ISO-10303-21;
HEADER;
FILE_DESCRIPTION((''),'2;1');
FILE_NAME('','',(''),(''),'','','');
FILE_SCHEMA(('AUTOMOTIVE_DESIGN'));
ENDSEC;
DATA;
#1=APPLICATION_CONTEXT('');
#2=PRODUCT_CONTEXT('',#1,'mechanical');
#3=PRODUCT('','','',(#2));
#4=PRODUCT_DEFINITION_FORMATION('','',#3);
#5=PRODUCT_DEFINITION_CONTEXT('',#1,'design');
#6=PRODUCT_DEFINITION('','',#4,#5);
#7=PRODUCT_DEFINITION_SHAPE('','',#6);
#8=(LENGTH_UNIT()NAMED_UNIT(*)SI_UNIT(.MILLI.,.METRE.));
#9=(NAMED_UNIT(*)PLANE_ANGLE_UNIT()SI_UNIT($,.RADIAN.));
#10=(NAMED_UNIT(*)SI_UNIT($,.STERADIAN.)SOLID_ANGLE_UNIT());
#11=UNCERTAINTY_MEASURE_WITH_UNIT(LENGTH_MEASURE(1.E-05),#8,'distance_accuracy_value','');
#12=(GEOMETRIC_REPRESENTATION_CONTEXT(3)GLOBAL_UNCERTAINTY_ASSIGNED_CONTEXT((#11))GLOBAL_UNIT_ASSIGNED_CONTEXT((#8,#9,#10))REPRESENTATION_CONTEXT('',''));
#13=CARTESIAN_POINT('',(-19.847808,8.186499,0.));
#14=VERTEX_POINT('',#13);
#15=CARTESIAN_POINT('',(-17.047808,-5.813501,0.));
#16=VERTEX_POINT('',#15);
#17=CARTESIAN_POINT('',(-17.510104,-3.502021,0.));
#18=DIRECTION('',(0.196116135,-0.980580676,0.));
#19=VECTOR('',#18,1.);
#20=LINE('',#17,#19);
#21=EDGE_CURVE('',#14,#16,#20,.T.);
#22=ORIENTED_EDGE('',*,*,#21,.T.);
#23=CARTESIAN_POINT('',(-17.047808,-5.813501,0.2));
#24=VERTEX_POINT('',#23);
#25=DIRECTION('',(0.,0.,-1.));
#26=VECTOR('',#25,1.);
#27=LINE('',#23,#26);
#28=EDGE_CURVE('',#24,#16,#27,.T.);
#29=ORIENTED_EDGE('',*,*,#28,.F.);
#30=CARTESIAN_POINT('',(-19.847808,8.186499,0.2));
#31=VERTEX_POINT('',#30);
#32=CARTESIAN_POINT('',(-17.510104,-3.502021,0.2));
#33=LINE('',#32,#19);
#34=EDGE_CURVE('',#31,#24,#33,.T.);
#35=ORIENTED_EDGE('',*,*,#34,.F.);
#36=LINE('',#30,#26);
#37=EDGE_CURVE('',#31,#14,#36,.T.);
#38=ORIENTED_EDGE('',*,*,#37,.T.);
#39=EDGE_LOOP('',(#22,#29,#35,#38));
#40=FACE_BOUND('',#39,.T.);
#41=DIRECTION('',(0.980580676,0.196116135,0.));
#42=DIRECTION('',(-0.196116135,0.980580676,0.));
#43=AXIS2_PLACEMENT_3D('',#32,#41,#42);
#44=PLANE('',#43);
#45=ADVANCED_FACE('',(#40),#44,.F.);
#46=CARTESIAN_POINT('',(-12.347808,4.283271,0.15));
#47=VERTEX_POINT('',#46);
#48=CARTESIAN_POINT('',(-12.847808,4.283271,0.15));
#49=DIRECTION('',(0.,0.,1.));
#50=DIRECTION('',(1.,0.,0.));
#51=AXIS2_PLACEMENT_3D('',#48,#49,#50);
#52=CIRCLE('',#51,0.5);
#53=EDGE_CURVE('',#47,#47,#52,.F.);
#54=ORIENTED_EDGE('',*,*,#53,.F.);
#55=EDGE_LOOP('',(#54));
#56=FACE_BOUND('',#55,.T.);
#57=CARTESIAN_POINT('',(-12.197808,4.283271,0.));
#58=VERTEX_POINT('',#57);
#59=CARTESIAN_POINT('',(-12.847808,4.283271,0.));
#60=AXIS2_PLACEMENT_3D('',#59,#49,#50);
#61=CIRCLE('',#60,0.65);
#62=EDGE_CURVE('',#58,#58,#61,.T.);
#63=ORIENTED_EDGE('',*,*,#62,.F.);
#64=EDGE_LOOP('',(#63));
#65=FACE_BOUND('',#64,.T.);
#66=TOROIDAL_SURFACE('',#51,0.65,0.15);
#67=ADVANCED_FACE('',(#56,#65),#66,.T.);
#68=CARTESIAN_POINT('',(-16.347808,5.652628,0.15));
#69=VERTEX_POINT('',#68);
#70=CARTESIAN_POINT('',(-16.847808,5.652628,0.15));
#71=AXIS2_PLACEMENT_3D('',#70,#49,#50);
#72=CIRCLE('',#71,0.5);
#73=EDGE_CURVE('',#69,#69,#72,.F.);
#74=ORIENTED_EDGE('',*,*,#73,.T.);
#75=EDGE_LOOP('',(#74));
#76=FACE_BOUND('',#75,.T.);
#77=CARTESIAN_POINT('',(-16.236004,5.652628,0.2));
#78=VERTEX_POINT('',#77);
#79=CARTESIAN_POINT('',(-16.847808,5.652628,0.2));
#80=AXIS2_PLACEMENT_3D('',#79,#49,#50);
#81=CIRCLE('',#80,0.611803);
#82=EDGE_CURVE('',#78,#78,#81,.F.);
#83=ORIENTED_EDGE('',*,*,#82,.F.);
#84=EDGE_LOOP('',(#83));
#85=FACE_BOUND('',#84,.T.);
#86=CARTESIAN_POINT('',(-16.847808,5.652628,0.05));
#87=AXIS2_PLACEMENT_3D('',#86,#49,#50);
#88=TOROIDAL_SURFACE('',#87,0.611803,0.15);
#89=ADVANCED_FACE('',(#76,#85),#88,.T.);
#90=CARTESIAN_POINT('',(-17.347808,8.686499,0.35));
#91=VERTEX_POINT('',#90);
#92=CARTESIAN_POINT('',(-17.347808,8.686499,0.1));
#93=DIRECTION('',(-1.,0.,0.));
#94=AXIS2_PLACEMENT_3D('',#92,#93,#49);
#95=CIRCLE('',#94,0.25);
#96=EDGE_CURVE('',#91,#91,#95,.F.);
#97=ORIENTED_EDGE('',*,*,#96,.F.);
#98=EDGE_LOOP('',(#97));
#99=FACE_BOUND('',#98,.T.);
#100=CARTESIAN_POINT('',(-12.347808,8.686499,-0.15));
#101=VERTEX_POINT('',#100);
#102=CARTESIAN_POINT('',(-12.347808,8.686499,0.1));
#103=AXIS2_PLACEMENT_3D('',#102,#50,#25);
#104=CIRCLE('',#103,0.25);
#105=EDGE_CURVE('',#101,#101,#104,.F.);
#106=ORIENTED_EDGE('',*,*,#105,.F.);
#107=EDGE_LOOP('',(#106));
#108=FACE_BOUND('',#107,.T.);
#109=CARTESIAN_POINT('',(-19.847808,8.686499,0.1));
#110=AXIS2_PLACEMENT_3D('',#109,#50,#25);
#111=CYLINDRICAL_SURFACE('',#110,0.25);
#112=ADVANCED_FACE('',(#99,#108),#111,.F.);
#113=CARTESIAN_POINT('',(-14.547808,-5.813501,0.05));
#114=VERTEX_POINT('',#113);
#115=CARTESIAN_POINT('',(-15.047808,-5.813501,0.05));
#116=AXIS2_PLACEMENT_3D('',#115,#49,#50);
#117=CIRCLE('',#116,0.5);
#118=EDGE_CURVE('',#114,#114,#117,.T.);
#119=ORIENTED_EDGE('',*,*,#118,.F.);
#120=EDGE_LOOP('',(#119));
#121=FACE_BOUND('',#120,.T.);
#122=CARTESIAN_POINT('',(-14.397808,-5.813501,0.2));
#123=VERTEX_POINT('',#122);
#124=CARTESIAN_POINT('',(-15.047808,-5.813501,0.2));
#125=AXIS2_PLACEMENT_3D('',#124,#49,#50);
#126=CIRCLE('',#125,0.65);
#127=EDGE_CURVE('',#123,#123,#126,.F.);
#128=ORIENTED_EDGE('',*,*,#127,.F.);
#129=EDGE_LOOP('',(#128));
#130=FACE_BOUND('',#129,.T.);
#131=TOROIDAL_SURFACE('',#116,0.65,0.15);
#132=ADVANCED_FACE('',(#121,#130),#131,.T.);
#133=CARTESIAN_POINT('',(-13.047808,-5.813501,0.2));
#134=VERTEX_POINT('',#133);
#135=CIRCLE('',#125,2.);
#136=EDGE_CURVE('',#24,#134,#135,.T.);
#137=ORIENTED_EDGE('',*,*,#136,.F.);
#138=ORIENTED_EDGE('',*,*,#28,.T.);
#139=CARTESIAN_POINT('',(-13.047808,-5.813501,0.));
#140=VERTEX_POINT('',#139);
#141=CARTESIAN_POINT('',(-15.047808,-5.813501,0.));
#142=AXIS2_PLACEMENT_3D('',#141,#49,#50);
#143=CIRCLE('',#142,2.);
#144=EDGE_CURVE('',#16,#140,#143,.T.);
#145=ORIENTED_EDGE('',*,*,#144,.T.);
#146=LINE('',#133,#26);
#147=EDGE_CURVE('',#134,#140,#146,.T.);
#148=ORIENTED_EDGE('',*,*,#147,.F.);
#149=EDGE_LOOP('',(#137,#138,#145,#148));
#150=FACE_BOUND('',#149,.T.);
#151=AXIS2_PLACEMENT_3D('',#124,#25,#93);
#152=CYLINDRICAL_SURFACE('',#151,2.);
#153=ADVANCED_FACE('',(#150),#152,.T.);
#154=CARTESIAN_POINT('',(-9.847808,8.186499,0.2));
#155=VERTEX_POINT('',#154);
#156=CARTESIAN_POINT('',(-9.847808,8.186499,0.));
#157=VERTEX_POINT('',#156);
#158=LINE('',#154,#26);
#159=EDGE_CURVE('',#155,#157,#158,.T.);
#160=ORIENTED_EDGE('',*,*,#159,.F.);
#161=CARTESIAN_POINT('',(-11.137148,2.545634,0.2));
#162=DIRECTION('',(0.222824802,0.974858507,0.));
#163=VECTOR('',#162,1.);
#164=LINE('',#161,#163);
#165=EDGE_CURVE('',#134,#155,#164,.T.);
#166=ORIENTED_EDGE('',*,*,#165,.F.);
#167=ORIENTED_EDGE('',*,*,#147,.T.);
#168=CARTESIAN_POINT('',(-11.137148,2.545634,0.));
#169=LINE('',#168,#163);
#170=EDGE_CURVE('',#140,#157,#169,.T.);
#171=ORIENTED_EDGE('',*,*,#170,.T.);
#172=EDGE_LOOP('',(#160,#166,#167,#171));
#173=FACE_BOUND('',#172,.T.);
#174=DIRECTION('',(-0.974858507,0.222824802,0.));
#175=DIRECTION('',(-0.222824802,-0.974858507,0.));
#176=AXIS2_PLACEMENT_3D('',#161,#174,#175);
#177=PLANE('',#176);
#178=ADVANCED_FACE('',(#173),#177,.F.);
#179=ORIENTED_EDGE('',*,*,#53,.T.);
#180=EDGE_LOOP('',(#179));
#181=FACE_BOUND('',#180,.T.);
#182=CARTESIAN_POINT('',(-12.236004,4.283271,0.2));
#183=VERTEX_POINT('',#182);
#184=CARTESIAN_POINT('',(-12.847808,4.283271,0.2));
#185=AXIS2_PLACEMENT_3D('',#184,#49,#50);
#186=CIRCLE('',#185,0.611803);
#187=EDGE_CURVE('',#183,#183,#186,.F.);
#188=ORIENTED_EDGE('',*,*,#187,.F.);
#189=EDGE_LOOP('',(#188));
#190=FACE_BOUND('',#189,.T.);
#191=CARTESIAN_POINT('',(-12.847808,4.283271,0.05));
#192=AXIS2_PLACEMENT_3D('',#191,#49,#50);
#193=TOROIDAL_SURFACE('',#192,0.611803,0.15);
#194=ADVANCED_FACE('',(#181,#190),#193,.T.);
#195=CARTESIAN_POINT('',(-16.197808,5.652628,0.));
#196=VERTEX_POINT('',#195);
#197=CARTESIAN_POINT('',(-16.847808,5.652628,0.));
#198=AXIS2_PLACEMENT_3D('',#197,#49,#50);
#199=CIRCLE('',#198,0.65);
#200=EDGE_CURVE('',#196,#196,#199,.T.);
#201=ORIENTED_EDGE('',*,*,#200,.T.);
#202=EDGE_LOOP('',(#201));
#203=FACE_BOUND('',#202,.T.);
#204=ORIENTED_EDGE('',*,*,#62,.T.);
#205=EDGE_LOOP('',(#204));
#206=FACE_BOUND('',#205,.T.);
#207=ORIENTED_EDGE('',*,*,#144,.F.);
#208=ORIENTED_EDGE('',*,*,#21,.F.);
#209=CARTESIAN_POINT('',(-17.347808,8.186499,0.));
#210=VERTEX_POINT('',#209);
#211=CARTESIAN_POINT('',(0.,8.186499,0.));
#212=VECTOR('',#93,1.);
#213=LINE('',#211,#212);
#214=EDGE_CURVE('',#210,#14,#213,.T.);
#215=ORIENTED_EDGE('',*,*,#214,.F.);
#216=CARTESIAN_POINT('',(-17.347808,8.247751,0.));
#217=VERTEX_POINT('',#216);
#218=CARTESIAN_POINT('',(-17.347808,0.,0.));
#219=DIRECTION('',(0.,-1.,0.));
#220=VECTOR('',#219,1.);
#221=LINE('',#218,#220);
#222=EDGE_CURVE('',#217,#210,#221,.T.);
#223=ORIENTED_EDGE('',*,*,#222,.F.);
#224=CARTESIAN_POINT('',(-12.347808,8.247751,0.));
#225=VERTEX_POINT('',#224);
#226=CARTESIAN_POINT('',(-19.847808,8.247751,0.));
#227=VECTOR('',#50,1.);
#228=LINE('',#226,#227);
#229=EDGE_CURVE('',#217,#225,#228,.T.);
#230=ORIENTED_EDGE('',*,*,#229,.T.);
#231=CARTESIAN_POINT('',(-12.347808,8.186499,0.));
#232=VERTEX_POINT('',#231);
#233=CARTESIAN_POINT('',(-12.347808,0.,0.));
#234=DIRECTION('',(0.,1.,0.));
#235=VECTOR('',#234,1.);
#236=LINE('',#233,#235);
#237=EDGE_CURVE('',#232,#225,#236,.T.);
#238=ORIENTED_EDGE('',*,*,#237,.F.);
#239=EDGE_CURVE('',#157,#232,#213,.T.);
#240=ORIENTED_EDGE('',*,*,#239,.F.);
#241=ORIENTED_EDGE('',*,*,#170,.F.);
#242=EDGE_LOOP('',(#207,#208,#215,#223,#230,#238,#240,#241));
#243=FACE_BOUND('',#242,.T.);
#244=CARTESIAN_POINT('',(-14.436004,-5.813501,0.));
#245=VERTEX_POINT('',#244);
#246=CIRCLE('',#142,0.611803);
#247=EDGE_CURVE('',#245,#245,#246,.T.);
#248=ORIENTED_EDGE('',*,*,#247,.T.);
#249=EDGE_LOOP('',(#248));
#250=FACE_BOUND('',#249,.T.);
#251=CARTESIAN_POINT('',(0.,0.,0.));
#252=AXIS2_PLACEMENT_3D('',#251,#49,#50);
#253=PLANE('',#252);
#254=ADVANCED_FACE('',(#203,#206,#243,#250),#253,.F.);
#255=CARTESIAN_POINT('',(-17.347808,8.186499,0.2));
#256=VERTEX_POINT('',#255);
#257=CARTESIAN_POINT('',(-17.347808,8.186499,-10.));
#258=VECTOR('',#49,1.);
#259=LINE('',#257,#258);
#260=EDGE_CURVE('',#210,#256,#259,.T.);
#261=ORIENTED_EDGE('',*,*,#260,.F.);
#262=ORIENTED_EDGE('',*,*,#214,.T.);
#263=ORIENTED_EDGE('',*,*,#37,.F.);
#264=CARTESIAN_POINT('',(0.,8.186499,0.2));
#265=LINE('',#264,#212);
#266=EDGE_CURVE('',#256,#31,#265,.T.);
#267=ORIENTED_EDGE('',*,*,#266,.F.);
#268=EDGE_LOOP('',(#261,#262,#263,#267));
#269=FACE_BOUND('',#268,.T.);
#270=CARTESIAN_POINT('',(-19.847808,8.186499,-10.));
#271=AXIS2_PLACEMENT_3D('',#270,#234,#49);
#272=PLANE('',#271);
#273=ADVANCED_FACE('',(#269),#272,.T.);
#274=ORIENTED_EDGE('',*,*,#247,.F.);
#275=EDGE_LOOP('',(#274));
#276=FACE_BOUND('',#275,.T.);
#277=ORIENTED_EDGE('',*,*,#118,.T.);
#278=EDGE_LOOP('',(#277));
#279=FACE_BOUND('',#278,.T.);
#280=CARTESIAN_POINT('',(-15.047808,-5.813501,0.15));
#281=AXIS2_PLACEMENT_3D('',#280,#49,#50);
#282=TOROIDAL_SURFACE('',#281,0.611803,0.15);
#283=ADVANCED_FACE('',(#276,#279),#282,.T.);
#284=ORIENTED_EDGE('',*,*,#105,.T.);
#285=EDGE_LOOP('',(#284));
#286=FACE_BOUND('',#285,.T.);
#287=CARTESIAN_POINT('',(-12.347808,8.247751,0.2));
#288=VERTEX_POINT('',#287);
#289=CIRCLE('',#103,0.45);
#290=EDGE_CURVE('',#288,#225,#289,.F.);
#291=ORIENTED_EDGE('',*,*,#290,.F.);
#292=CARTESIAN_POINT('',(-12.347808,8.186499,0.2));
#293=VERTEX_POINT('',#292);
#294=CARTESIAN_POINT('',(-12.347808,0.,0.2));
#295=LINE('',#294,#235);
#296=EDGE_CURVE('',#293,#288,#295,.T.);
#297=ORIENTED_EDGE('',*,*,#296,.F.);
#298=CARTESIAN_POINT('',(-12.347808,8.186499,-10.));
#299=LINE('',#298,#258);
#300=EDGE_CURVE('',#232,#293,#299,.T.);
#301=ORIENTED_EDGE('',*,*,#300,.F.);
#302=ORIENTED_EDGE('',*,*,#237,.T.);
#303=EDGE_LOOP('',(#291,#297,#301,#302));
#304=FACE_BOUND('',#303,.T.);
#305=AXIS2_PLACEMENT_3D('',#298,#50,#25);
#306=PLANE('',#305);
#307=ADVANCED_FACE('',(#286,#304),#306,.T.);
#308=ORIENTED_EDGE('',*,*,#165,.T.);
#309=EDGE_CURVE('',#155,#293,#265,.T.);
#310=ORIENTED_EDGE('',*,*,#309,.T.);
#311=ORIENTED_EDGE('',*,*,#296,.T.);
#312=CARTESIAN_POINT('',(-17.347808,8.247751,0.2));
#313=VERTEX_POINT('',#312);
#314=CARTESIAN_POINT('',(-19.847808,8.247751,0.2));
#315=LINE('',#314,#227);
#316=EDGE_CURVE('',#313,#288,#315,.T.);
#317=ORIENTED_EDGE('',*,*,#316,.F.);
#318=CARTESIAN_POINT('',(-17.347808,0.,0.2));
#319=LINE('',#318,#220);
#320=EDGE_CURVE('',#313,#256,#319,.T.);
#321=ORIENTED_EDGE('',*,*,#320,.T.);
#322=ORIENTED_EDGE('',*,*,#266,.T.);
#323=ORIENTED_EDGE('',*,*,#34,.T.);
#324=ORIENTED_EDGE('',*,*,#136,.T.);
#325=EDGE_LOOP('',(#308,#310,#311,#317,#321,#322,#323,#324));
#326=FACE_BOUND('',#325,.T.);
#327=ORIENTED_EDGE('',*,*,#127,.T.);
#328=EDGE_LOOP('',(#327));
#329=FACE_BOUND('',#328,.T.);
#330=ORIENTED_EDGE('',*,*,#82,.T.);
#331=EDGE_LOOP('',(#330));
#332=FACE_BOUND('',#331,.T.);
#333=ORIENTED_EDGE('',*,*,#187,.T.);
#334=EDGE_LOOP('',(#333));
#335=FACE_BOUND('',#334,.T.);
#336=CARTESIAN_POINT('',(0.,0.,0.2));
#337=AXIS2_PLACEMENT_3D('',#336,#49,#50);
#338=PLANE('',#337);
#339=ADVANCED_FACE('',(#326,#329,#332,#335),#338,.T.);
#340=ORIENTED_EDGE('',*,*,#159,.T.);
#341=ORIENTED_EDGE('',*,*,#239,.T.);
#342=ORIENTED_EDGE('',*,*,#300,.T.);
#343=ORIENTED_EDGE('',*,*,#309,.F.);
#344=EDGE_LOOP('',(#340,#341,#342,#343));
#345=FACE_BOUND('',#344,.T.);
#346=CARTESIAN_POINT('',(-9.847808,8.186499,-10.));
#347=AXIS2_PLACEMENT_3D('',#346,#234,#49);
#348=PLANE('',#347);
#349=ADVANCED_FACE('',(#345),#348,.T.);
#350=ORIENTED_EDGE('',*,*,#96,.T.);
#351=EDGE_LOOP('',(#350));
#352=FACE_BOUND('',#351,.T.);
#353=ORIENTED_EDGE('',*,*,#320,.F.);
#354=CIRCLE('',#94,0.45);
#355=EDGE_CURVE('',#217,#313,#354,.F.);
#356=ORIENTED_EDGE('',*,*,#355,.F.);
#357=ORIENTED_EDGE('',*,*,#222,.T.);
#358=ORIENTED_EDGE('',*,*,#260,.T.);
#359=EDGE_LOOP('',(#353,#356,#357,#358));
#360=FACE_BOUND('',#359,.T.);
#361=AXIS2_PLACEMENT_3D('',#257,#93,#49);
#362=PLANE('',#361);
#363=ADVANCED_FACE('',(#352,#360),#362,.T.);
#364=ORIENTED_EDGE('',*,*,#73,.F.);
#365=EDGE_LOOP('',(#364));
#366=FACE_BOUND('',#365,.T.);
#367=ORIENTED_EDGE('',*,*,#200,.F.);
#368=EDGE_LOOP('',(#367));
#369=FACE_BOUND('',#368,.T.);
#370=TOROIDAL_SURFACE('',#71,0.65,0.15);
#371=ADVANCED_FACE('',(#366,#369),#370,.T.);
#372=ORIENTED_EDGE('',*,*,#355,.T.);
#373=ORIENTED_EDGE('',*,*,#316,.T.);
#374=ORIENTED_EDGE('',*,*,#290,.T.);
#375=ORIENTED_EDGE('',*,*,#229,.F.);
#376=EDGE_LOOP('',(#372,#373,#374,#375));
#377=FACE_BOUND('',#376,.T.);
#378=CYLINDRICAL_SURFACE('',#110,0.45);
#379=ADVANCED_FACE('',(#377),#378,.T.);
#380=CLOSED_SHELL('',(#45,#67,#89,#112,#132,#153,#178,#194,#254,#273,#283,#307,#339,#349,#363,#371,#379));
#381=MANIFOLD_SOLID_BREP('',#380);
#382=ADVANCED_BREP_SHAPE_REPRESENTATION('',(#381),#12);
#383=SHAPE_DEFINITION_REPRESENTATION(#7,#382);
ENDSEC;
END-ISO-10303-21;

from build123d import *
from build123d.topology import SkipClean

# Parameters (mm, degrees)
ESBO_O1_R                  = 0.5
RESSALTO_EXTRUS_O1_DEPTH   = 0.2
FILETE1_R                  = 0.15
FILETE2_R                  = 0.15
ESBO_O6_W                  = 10
ESBO_O6_H                  = 0.2
RESSALTO_EXTRUS_O2_DEPTH   = 0.5
RESSALTO_EXTRUS_O3_DEPTH   = 10
CORTE_EXTRUS_O1_DEPTH      = 10
CORTE_EXTRUS_O2_DEPTH      = 10
CORTE_EXTRUS_O2_DEPTH_BACK = 10
ESBO_O9_W                  = 2.5
ESBO_O9_H                  = 2


with BuildPart() as part:
    # Esboço1 → Ressalto-extrusão1 (new body)
    with BuildSketch(Plane.XY):
        with BuildLine():
            Line((-19.847807635, 8.186498983), (-9.847807635, 8.186498983))
            Line((-9.847807635, 8.186498983), (-13.047807635, -5.813501017))
            ThreePointArc((-13.047807635, -5.813501017), (-15.047807635, -7.813501017), (-17.047807635, -5.813501017))
            Line((-17.047807635, -5.813501017), (-19.847807635, 8.186498983))
        make_face()
        with Locations((-12.847807635, 4.283271461)):
            Circle(ESBO_O1_R, mode=Mode.SUBTRACT)
        with Locations((-16.847807635, 5.652628285)):
            Circle(ESBO_O1_R, mode=Mode.SUBTRACT)
        with Locations((-15.047807635, -5.813501017)):
            Circle(ESBO_O1_R, mode=Mode.SUBTRACT)
    extrude(amount=RESSALTO_EXTRUS_O1_DEPTH)

    # Filete1
    filete1_edges = [part.edges().sort_by_distance(p)[0] for p in [
        (-17.347807635, 5.652628285, 0),
        (-13.347807635, 4.283271461, 0),
        (-15.547807635, -5.813501017, 0.2),
    ]]
    fillet(filete1_edges, radius=FILETE1_R)

    # Filete2
    # the kernel refuses this fillet: 0.15 mm, written as the material it takes off along each edge
    with BuildSketch(Plane(origin=(-15.047807635, -5.813501017, 0), x_dir=(1, 0, 0), z_dir=(0, -1, 0))) as filete2_piece_1:
        with BuildLine():
            CenterArc((0.611803399, 0.15), FILETE2_R, 221.810314896, 48.189685104)
            Line((0.5, 0.05), (0.497763932, 0.048))
            ThreePointArc((0.497763932, 0.048), (0.497, 0.025), (0.497, 0))
            Line((0.497, 0), (0.5, -0.003))
            Line((0.5, -0.003), (0.611803399, -0.003))
            Line((0.611803399, -0.003), (0.611803399, 0))
        make_face()
    revolve(axis=Axis((-15.047807635, -5.813501017, 0), (0, 0, 1)), mode=Mode.SUBTRACT)
    with BuildSketch(Plane(origin=(-12.847807635, 4.283271461, 0.2), x_dir=(1, 0, 0), z_dir=(0, -1, 0))) as filete2_piece_2:
        with BuildLine():
            CenterArc((0.611803399, -0.15), FILETE2_R, 90, 48.189685104)
            Line((0.611803399, 0), (0.611803399, 0.003))
            Line((0.611803399, 0.003), (0.5, 0.003))
            Line((0.5, 0.003), (0.497, 0))
            ThreePointArc((0.497, 0), (0.497, -0.025), (0.497763932, -0.048))
            Line((0.497763932, -0.048), (0.5, -0.05))
        make_face()
    revolve(axis=Axis((-12.847807635, 4.283271461, 0.2), (0, 0, 1)), mode=Mode.SUBTRACT)
    with BuildSketch(Plane(origin=(-16.847807635, 5.652628285, 0.2), x_dir=(1, 0, 0), z_dir=(0, -1, 0))) as filete2_piece_3:
        with BuildLine():
            CenterArc((0.611803399, -0.15), FILETE2_R, 90, 48.189685104)
            Line((0.5, -0.05), (0.497763932, -0.048))
            ThreePointArc((0.497763932, -0.048), (0.497, -0.025), (0.497, 0))
            Line((0.497, 0), (0.5, 0.003))
            Line((0.5, 0.003), (0.611803399, 0.003))
            Line((0.611803399, 0.003), (0.611803399, 0))
        make_face()
    revolve(axis=Axis((-16.847807635, 5.652628285, 0.2), (0, 0, 1)), mode=Mode.SUBTRACT)

    # Esboço6 → Ressalto-extrusão2 (add)
    with BuildSketch(Plane(origin=(0, 8.186498983, 0), x_dir=(1, 0, 0), z_dir=(0, 1, 0))):
        with Locations((-14.847807635, -0.1)):
            Rectangle(ESBO_O6_W, ESBO_O6_H)
    extrude(amount=RESSALTO_EXTRUS_O2_DEPTH)

    # Esboço7 → Ressalto-extrusão3 (add)
    with BuildSketch(Plane(origin=(-9.847807635, 0, 0), x_dir=(0, 0, -1), z_dir=(1, 0, 0))):
        with BuildLine():
            ThreePointArc((0.35, 8.686498983), (-0.380624304, 9.038280165), (-0.2, 8.247750764))
            Line((-0.2, 8.247750764), (-0.2, 8.457370198))
            ThreePointArc((-0.2, 8.457370198), (-0.236930639, 8.89566399), (0.15, 8.686498983))
            ThreePointArc((0.15, 8.686498983), (0.109165007, 8.549568344), (0, 8.457370198))
            Line((0, 8.457370198), (0, 8.247750764))
            ThreePointArc((0, 8.247750764), (0.251781182, 8.405874679), (0.35, 8.686498983))
        make_face()
        with BuildLine():
            Line((-0.2, 8.457370198), (-0.2, 8.247750764))
            ThreePointArc((-0.2, 8.247750764), (-0.1, 8.236498983), (0, 8.247750764))
            Line((0, 8.247750764), (0, 8.457370198))
            ThreePointArc((0, 8.457370198), (-0.1, 8.436498983), (-0.2, 8.457370198))
        make_face()
    extrude(amount=-RESSALTO_EXTRUS_O3_DEPTH)

    # Esboço8 → Corte-extrusão1 (cut)
    with SkipClean():  # the faces are left unmerged after this step: merging them gives an invalid solid
        with BuildSketch(Plane(origin=(-9.847807635, 0, 0), x_dir=(0, 0, -1), z_dir=(1, 0, 0))):
            with BuildLine():
                ThreePointArc((-0.2, 8.457370198), (-0.1, 8.936498983), (0, 8.457370198))
                Line((0, 8.457370198), (0, 8.686498983))
                Line((0, 8.686498983), (-0.2, 8.686498983))
                Line((-0.2, 8.686498983), (-0.2, 8.457370198))
            make_face()
            with BuildLine():
                Line((0, 8.686498983), (0, 8.457370198))
                ThreePointArc((0, 8.457370198), (0.109165007, 8.549568344), (0.15, 8.686498983))
                ThreePointArc((0.15, 8.686498983), (-0.236930639, 8.89566399), (-0.2, 8.457370198))
                Line((-0.2, 8.457370198), (-0.2, 8.686498983))
                Line((-0.2, 8.686498983), (0, 8.686498983))
            make_face()
            with BuildLine():
                ThreePointArc((-0.2, 8.457370198), (-0.1, 8.436498983), (0, 8.457370198))
                Line((0, 8.457370198), (0, 8.686498983))
                Line((0, 8.686498983), (-0.2, 8.686498983))
                Line((-0.2, 8.686498983), (-0.2, 8.457370198))
            make_face()
        extrude(amount=-CORTE_EXTRUS_O1_DEPTH, mode=Mode.SUBTRACT)

    # Esboço9 → Corte-extrusão2 (cut, two sides: drawn at the far end of the back side and taken through both)
    with BuildSketch(Plane(origin=(0, 0, 0), x_dir=(-1, 0, 0), z_dir=(0, 0, -1)).offset(-CORTE_EXTRUS_O2_DEPTH_BACK)):
        with Locations((11.097807635, 9.186498983)):
            Rectangle(ESBO_O9_W, ESBO_O9_H)
        with Locations((18.597807635, 9.186498983)):
            Rectangle(ESBO_O9_W, ESBO_O9_H)
    extrude(amount=CORTE_EXTRUS_O2_DEPTH + CORTE_EXTRUS_O2_DEPTH_BACK, mode=Mode.SUBTRACT)


solid = part.part
